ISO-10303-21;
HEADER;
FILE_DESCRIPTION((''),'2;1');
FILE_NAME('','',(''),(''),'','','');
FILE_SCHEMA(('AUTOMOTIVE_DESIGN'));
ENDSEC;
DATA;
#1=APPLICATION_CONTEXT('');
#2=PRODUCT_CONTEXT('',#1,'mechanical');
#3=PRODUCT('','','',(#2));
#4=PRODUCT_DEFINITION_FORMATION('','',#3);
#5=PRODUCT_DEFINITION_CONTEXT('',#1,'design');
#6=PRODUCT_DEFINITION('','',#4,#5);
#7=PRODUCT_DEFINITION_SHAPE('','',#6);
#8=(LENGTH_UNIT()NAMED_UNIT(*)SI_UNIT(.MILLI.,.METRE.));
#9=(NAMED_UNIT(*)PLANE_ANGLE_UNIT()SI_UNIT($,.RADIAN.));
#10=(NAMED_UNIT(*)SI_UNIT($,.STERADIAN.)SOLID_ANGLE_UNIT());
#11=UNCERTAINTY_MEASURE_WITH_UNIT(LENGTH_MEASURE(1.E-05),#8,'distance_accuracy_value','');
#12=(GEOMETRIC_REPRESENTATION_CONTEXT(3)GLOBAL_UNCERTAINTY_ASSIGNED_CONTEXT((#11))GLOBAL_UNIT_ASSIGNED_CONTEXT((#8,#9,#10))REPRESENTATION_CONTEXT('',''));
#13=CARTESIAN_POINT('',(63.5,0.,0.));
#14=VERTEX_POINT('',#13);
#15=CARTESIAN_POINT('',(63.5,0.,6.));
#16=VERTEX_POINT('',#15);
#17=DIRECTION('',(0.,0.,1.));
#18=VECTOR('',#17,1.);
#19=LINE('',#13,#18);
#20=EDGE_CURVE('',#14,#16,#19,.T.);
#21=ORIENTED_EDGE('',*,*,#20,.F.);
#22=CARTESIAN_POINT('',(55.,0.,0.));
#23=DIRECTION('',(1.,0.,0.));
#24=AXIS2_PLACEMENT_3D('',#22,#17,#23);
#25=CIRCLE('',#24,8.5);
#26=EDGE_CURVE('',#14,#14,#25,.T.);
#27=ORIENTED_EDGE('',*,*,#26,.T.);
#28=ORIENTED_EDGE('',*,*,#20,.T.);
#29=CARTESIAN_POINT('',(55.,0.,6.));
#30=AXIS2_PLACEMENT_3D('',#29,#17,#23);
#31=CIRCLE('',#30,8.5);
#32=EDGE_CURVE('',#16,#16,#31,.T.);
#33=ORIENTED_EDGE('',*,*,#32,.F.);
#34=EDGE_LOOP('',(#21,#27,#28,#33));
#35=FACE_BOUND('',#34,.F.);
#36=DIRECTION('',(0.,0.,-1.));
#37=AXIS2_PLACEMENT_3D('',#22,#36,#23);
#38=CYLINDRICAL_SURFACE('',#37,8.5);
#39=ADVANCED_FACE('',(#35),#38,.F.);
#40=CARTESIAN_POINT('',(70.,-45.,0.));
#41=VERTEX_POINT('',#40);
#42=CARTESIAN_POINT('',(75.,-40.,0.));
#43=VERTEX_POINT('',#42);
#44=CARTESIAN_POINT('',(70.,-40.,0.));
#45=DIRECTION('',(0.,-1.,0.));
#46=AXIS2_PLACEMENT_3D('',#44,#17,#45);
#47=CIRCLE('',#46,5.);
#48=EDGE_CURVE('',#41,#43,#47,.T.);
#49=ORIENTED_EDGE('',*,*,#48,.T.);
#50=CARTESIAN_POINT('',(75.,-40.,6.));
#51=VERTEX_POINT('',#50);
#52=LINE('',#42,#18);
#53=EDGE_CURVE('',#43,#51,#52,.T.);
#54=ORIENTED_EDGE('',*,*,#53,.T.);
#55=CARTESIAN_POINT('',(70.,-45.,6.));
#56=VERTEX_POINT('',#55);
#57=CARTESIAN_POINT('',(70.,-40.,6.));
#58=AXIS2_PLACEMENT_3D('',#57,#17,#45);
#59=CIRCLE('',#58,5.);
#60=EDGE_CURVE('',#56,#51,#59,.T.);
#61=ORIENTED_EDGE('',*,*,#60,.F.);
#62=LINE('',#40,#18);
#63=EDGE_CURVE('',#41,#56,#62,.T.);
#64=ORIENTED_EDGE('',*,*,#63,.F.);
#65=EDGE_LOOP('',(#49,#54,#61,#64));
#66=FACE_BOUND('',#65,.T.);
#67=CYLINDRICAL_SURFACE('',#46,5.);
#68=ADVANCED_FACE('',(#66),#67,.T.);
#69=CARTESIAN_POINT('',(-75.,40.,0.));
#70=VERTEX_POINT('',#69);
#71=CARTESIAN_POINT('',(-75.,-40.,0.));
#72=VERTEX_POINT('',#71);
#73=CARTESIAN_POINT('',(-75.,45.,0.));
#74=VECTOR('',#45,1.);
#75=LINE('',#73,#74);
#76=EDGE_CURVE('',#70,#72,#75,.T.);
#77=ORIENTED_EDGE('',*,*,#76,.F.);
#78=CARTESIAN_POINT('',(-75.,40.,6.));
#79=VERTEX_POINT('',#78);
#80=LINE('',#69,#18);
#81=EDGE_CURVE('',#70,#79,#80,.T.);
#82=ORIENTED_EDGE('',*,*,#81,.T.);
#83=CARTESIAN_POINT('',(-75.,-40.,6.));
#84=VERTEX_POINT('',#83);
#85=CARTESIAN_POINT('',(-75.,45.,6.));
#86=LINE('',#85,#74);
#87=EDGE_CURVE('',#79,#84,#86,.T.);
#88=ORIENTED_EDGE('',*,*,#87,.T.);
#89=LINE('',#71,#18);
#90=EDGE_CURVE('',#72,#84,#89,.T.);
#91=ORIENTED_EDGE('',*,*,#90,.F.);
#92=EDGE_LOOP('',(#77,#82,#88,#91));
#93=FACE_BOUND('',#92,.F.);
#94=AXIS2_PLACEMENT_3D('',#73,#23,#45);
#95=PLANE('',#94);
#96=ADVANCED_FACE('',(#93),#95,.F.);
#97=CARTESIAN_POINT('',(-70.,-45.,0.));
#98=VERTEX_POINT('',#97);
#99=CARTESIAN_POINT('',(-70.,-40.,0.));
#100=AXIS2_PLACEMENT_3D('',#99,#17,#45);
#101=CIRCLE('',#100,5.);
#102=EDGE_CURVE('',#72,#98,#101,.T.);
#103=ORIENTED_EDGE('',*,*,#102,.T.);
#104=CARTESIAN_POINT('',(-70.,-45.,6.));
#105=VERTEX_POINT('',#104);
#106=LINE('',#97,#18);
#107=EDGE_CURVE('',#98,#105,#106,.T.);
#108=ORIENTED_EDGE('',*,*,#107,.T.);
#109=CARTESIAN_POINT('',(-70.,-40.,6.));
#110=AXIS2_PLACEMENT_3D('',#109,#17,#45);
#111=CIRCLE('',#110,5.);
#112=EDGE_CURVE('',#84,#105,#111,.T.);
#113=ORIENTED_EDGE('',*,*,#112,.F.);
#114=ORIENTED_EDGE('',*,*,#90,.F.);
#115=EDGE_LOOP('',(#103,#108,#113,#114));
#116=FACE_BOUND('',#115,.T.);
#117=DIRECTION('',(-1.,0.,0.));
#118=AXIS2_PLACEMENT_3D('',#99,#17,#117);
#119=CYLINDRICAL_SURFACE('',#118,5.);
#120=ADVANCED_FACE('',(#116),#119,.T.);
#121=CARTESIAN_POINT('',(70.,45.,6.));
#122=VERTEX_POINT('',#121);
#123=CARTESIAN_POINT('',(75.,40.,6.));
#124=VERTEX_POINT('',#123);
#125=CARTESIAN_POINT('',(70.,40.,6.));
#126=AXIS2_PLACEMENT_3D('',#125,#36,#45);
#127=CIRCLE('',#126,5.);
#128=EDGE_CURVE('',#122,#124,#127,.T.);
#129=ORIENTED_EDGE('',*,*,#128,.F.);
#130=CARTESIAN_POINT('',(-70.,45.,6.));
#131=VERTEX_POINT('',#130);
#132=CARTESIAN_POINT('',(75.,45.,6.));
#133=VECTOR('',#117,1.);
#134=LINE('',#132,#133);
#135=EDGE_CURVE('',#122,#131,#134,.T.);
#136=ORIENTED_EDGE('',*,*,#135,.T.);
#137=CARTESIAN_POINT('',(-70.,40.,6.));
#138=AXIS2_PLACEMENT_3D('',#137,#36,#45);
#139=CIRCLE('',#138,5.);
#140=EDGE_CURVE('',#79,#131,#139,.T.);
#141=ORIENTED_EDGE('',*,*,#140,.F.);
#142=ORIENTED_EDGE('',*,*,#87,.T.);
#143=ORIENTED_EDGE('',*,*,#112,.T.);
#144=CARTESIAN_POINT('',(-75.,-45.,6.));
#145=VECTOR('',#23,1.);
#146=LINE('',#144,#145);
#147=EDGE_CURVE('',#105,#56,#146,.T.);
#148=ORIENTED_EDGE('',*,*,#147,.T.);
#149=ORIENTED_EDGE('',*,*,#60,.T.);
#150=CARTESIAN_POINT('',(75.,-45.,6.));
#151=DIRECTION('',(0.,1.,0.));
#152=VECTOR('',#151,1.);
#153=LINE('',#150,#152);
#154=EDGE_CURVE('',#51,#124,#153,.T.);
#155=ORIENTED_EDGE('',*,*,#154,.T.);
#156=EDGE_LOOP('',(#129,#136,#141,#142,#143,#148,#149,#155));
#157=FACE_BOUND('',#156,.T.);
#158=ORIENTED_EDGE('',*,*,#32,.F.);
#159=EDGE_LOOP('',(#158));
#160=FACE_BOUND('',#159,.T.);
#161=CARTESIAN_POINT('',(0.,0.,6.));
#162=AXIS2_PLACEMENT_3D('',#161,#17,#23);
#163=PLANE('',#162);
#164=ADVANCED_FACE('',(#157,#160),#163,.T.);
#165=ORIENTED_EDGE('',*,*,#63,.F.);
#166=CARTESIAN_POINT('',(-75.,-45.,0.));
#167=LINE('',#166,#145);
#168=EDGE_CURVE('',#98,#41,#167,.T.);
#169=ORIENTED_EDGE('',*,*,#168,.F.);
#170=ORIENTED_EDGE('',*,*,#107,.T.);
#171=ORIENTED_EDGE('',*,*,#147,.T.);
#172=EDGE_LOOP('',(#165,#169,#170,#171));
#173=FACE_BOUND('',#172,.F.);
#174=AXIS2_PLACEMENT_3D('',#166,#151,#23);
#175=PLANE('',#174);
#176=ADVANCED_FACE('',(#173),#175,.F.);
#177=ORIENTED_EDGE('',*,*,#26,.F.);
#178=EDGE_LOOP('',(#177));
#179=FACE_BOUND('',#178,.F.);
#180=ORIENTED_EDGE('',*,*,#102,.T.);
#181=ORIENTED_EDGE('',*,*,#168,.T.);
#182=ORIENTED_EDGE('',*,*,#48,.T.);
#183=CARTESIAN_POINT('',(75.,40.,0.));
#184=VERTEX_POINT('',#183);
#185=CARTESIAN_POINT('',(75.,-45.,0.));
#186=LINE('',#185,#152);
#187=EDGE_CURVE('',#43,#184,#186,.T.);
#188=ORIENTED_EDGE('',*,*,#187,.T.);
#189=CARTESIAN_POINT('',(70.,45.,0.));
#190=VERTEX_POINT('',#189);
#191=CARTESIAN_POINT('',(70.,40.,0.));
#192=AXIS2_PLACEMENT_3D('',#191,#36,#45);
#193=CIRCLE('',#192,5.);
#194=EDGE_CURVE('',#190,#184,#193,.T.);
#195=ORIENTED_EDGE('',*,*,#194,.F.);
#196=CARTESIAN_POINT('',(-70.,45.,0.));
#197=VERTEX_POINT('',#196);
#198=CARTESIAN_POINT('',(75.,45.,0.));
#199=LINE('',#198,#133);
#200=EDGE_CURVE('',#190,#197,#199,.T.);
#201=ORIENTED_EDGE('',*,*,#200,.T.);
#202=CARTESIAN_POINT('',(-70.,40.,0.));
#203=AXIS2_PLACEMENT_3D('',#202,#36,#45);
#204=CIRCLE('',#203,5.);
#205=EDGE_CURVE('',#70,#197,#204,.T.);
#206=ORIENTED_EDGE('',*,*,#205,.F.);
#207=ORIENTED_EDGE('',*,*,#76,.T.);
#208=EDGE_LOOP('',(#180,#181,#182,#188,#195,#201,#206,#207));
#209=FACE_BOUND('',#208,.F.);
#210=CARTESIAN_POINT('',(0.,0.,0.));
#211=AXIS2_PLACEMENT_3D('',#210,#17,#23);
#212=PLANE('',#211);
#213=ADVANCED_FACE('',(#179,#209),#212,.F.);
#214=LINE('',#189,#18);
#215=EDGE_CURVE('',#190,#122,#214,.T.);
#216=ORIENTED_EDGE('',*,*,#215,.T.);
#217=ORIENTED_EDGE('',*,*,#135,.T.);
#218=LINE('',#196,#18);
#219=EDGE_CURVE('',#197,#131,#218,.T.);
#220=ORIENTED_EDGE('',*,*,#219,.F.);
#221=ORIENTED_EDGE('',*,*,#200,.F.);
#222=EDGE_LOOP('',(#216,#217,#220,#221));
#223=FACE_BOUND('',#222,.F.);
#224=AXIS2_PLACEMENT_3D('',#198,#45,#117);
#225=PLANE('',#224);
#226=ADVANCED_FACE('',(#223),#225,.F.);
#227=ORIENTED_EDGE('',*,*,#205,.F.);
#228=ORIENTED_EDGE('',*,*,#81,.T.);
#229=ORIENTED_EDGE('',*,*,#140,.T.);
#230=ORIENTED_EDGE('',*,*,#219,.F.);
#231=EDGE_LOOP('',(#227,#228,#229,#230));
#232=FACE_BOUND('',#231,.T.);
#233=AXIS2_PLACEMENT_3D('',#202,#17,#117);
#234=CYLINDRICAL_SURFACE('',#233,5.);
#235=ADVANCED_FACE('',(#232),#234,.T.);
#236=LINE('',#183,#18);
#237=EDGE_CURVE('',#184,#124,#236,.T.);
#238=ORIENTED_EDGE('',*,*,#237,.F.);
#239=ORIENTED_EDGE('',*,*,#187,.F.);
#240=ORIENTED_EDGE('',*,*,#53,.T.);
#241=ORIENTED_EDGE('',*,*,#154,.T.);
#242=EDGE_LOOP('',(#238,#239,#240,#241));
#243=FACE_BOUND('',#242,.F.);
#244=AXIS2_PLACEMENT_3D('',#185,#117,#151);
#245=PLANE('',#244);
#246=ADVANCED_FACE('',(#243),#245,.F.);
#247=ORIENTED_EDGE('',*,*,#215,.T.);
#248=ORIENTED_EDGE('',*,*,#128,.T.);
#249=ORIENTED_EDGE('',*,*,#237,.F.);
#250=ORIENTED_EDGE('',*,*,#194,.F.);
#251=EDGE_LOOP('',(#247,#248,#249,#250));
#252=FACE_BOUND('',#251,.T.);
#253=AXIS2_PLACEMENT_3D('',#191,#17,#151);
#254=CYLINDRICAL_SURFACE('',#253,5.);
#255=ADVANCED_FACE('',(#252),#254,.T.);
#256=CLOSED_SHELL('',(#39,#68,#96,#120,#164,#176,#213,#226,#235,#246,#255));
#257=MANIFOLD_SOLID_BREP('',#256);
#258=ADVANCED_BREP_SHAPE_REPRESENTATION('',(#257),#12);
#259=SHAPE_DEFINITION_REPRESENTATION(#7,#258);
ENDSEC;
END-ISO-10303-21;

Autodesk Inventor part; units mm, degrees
ref_plane "YZ Plane" through (0, 0, 0) normal (1, 0, 0) x (0, 1, 0)
ref_plane "XZ Plane" through (0, 0, 0) normal (0, 1, 0) x (-1, 0, 0)
ref_plane "XY Plane" through (0, 0, 0) normal (0, 0, 1) x (1, 0, 0)
sketch "Sketch1" plane through (0, 0, 0) normal (0, 0, 1) x (1, 0, 0)
  line L0 (-75, -45) -> (75, -45)
  line L1 (75, -45) -> (75, 45)
  line L2 (75, 45) -> (-75, 45)
  line L3 (-75, 45) -> (-75, -45)
  line L4 (-75, -45) -> (75, 45) construction
  line L5 (75, -45) -> (-75, 45) construction
  circle A0 centre (55, -25) radius 8.5
  circle A1 centre (55, 25) radius 8.5
  line L6 (0, 0) -> (75, 0) construction
  circle A2 centre (55, 0) radius 8.5
  dimension "d0" = 150
  dimension "d1" = 90
  dimension "d23" = 17
  dimension "d25" = 20
  dimension "d26" = 20
extrude "Plate1" add sketch "Sketch1" along normal blind 6 contours L3 L2 L1 L0 | A0 | A1
fillet "Corner Round2" radius 5 4 edges at (-75, 45, 3) (-75, -45, 3) (75, -45, 3) (75, 45, 3)
equation "\"d26\" = d25"
equation "\"d2\" = Thickness"
equation "\"BendReliefWidth\" = Thickness"
equation "\"BendReliefDepth\" = 0.5 * Thickness"
equation "\"CornerReliefSize\" = 4 * Thickness"
equation "\"MinimumRemnant\" = 2 * Thickness"
equation "\"TransitionRadius\" = BendRadius"
equation "\"JacobiRadiusSize\" = BendRadius"
equation "\"GapSize\" = Thickness"
equation "\"Thickness\" = 6"
equation "\"BendRadius\" = 5"
properties part number "PRS 9695 leg floor plate_D1200" material "Stainless Steel"
